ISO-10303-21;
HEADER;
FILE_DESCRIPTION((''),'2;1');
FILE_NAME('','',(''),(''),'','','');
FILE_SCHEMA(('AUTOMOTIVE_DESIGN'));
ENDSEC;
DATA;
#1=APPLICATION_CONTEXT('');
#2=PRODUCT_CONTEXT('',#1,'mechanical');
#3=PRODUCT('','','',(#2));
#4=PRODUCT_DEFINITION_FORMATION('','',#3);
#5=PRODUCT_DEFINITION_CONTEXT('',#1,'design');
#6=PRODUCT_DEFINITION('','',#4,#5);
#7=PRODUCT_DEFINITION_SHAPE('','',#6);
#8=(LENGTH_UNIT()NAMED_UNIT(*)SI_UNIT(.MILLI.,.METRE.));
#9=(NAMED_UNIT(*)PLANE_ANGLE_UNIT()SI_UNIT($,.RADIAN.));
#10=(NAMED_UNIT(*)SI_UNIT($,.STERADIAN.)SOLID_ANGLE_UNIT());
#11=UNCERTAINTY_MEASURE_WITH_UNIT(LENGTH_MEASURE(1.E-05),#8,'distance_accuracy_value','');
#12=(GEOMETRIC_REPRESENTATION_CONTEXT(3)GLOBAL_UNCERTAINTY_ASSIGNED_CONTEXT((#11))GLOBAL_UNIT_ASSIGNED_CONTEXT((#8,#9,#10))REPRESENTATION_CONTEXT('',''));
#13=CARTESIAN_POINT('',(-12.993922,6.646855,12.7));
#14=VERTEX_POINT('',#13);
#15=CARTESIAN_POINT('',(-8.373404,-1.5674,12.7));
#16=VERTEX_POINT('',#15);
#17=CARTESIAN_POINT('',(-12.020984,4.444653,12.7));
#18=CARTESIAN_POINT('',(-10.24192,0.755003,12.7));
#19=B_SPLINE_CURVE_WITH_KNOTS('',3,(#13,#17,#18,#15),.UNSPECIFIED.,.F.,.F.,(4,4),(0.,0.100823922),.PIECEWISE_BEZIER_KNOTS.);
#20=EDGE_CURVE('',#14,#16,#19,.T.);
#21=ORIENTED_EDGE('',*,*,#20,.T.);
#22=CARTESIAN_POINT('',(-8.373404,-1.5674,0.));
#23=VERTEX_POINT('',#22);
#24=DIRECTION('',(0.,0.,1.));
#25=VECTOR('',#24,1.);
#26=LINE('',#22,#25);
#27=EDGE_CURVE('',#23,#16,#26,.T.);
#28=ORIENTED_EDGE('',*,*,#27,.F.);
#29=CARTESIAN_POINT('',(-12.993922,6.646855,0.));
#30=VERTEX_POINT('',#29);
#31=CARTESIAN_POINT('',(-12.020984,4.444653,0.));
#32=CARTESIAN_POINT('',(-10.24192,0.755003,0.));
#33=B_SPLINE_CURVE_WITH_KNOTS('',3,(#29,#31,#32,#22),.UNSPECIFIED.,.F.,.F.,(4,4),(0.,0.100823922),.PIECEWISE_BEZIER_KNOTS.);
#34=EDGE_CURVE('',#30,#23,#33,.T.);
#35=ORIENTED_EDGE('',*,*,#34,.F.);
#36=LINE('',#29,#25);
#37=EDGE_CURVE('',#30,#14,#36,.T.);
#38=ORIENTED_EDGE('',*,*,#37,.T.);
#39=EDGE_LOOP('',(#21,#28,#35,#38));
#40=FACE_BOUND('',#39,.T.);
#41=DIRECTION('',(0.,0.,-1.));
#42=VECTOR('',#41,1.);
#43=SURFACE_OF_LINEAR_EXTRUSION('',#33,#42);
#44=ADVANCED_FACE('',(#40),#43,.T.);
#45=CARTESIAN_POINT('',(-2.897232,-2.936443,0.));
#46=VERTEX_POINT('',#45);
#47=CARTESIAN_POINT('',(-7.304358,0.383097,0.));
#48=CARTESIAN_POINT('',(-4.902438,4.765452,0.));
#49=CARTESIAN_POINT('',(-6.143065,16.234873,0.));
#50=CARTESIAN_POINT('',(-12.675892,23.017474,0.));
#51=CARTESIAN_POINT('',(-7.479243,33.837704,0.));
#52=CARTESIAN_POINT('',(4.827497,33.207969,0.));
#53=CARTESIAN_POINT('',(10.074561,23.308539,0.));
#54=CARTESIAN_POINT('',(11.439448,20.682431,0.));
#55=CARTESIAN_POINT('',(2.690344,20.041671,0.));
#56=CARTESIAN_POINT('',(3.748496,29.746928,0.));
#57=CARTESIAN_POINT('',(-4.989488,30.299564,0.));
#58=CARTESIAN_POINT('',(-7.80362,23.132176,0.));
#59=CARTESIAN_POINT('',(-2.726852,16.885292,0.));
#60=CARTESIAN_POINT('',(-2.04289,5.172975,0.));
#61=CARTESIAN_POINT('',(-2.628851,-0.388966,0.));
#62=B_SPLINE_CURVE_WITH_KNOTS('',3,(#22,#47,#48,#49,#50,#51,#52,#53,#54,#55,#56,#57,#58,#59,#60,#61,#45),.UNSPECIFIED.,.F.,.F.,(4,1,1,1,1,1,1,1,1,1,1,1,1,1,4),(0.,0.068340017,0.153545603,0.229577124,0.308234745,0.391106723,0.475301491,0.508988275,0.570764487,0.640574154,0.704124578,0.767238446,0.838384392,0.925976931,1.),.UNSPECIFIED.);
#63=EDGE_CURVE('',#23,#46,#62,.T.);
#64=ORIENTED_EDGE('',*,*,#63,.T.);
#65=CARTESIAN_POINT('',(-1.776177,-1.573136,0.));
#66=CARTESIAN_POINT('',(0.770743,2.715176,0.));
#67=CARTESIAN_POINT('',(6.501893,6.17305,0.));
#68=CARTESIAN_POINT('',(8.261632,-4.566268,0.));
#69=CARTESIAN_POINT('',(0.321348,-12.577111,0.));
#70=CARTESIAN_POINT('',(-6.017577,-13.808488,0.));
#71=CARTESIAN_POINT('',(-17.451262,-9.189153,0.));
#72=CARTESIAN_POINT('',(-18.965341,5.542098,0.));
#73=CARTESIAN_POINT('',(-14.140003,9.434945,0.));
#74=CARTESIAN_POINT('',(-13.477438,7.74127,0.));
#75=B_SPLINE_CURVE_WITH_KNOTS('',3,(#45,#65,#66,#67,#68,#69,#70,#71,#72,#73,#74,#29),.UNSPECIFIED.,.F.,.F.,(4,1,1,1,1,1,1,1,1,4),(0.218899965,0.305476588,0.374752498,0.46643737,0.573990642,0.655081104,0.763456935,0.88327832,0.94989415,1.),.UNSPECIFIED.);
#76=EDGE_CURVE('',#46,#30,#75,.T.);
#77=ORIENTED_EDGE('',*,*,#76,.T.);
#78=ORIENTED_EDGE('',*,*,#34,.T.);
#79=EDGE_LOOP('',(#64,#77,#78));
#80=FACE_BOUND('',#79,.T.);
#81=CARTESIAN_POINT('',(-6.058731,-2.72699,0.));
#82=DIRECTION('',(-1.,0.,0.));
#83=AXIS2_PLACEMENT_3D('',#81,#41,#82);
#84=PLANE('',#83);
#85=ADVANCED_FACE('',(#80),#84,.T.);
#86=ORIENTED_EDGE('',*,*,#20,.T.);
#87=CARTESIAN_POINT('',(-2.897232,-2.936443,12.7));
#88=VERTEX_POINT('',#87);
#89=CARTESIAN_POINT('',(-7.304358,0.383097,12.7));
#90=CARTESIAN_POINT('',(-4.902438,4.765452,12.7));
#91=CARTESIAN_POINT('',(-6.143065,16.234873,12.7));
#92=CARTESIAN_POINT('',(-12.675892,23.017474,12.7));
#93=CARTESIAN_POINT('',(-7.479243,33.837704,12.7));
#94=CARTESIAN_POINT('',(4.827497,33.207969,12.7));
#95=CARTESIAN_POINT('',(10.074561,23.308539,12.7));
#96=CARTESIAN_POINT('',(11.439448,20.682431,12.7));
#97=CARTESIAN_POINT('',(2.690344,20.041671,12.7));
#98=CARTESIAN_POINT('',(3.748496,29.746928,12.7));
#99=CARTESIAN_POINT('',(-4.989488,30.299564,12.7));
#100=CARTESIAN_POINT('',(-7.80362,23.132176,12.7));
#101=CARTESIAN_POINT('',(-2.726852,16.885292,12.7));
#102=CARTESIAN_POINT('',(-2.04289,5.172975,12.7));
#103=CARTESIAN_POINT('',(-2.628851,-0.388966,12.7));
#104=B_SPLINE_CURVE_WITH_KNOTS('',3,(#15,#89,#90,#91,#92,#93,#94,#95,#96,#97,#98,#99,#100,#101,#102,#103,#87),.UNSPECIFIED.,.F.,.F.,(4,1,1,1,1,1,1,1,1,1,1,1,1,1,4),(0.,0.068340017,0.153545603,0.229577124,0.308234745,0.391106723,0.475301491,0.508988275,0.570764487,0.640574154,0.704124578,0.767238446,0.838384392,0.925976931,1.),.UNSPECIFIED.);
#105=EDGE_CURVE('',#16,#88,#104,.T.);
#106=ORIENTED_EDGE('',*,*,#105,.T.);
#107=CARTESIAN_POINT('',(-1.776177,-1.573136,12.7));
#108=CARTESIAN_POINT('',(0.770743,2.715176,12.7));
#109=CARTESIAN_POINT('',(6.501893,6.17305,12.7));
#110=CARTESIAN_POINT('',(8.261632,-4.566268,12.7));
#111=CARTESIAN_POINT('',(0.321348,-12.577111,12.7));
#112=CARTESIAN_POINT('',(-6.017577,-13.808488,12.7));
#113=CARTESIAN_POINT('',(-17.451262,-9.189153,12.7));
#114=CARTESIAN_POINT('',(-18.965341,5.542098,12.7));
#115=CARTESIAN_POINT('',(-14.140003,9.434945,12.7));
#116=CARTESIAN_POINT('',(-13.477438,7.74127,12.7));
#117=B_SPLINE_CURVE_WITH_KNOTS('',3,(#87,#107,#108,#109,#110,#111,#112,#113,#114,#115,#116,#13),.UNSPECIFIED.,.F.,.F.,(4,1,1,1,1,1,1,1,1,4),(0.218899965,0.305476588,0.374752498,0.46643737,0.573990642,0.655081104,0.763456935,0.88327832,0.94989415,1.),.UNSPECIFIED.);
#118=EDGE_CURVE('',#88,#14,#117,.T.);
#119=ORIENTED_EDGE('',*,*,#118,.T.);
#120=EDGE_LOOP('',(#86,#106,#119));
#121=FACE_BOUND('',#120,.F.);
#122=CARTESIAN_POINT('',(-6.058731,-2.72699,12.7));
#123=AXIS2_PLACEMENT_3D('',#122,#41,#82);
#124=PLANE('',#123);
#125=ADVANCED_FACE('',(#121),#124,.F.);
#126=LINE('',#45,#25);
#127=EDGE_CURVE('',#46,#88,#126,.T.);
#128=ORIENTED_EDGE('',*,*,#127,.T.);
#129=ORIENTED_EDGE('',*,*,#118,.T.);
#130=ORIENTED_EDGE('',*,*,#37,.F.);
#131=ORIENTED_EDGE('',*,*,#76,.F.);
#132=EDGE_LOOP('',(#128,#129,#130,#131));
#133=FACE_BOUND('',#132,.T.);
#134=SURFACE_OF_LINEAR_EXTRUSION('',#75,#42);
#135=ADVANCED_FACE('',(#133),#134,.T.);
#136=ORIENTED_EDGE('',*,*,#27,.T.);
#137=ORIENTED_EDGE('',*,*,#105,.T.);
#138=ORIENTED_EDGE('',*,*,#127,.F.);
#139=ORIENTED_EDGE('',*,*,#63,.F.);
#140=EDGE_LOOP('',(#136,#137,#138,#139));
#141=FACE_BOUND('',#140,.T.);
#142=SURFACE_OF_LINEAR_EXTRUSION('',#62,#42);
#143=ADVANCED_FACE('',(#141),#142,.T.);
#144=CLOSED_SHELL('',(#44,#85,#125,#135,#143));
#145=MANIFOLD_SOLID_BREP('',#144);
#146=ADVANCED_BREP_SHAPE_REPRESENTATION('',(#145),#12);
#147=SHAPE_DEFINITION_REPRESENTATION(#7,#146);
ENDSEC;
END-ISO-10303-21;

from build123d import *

# Parameters (mm, degrees)
F1_DEPTH = 12.7


# Not quite as in the source:
# - a feature of the source that left no trace in its solid (it failed there, or was rolled back) is left out


with BuildPart() as f1:
    # F0 (on Top) → F1 (new body)
    with BuildSketch(Plane.XY):
        with BuildLine():
            add(Edge.make_bspline(
                [(-12.9939224571, 6.646854803), (-12.0209842013, 4.444653204), (-10.2419200653, 0.7550026988), (-8.3734039217, -1.5674004098)],
                knots=[0, 0, 0, 0, 0.1008239216, 0.1008239216, 0.1008239216, 0.1008239216], degree=3))
            add(Edge.make_bspline(
                [(-2.8972320724, -2.9364430811), (-1.776177319, -1.5731363584), (0.7707430366, 2.7151758339), (6.5018929938, 6.1730497094), (8.2616317976, -4.5662684102), (0.3213481372, -12.577111166), (-6.0175770538, -13.8084879138), (-17.4512622323, -9.1891533031), (-18.9653411147, 5.5420981515), (-14.1400034064, 9.4349451722), (-13.4774376543, 7.7412695142), (-12.9939224571, 6.646854803)],
                knots=[0.2188999646, 0.2188999646, 0.2188999646, 0.2188999646, 0.3054765878, 0.3747524984, 0.4664373696, 0.573990642, 0.6550811044, 0.7634569353, 0.8832783199, 0.94989415, 1, 1, 1, 1], degree=3))
            add(Edge.make_bspline(
                [(-8.3734039217, -1.5674004098), (-7.0943249904, -3.1571843121), (-4.8343729552, -4.7808880912), (-3.53246646, -3.7089471078), (-2.8972320724, -2.9364430811)],
                knots=[0.1008239216, 0.1008239216, 0.1008239216, 0.1008239216, 0.1698421928, 0.2188999646, 0.2188999646, 0.2188999646, 0.2188999646], degree=3))
        make_face()
        with BuildLine():
            add(Edge.make_bspline(
                [(-8.3734039217, -1.5674004098), (-7.3043582316, 0.3830967726), (-4.9024380761, 4.7654524935), (-6.1430653348, 16.2348730997), (-12.6758917382, 23.0174740706), (-7.4792433532, 33.8377035792), (4.8274970419, 33.2079692165), (10.0745612008, 23.3085390875), (11.4394480919, 20.6824307654), (2.690343607, 20.0416706357), (3.7484964525, 29.7469283628), (-4.9894882783, 30.2995644972), (-7.803620131, 23.1321761316), (-2.7268516768, 16.8852917181), (-2.0428900587, 5.1729754673), (-2.6288507594, -0.3889663524), (-2.8972320724, -2.9364430811)],
                knots=[0, 0, 0, 0, 0.0683400172, 0.1535456026, 0.2295771238, 0.3082347453, 0.391106723, 0.4753014914, 0.5089882749, 0.570764487, 0.6405741543, 0.7041245781, 0.7672384461, 0.8383843918, 0.9259769314, 1, 1, 1, 1], degree=3))
            add(Edge.make_bspline(
                [(-8.3734039217, -1.5674004098), (-7.0943249904, -3.1571843121), (-4.8343729552, -4.7808880912), (-3.53246646, -3.7089471078), (-2.8972320724, -2.9364430811)],
                knots=[0.1008239216, 0.1008239216, 0.1008239216, 0.1008239216, 0.1698421928, 0.2188999646, 0.2188999646, 0.2188999646, 0.2188999646], degree=3))
        make_face()
    extrude(amount=F1_DEPTH)


solid = f1.part
